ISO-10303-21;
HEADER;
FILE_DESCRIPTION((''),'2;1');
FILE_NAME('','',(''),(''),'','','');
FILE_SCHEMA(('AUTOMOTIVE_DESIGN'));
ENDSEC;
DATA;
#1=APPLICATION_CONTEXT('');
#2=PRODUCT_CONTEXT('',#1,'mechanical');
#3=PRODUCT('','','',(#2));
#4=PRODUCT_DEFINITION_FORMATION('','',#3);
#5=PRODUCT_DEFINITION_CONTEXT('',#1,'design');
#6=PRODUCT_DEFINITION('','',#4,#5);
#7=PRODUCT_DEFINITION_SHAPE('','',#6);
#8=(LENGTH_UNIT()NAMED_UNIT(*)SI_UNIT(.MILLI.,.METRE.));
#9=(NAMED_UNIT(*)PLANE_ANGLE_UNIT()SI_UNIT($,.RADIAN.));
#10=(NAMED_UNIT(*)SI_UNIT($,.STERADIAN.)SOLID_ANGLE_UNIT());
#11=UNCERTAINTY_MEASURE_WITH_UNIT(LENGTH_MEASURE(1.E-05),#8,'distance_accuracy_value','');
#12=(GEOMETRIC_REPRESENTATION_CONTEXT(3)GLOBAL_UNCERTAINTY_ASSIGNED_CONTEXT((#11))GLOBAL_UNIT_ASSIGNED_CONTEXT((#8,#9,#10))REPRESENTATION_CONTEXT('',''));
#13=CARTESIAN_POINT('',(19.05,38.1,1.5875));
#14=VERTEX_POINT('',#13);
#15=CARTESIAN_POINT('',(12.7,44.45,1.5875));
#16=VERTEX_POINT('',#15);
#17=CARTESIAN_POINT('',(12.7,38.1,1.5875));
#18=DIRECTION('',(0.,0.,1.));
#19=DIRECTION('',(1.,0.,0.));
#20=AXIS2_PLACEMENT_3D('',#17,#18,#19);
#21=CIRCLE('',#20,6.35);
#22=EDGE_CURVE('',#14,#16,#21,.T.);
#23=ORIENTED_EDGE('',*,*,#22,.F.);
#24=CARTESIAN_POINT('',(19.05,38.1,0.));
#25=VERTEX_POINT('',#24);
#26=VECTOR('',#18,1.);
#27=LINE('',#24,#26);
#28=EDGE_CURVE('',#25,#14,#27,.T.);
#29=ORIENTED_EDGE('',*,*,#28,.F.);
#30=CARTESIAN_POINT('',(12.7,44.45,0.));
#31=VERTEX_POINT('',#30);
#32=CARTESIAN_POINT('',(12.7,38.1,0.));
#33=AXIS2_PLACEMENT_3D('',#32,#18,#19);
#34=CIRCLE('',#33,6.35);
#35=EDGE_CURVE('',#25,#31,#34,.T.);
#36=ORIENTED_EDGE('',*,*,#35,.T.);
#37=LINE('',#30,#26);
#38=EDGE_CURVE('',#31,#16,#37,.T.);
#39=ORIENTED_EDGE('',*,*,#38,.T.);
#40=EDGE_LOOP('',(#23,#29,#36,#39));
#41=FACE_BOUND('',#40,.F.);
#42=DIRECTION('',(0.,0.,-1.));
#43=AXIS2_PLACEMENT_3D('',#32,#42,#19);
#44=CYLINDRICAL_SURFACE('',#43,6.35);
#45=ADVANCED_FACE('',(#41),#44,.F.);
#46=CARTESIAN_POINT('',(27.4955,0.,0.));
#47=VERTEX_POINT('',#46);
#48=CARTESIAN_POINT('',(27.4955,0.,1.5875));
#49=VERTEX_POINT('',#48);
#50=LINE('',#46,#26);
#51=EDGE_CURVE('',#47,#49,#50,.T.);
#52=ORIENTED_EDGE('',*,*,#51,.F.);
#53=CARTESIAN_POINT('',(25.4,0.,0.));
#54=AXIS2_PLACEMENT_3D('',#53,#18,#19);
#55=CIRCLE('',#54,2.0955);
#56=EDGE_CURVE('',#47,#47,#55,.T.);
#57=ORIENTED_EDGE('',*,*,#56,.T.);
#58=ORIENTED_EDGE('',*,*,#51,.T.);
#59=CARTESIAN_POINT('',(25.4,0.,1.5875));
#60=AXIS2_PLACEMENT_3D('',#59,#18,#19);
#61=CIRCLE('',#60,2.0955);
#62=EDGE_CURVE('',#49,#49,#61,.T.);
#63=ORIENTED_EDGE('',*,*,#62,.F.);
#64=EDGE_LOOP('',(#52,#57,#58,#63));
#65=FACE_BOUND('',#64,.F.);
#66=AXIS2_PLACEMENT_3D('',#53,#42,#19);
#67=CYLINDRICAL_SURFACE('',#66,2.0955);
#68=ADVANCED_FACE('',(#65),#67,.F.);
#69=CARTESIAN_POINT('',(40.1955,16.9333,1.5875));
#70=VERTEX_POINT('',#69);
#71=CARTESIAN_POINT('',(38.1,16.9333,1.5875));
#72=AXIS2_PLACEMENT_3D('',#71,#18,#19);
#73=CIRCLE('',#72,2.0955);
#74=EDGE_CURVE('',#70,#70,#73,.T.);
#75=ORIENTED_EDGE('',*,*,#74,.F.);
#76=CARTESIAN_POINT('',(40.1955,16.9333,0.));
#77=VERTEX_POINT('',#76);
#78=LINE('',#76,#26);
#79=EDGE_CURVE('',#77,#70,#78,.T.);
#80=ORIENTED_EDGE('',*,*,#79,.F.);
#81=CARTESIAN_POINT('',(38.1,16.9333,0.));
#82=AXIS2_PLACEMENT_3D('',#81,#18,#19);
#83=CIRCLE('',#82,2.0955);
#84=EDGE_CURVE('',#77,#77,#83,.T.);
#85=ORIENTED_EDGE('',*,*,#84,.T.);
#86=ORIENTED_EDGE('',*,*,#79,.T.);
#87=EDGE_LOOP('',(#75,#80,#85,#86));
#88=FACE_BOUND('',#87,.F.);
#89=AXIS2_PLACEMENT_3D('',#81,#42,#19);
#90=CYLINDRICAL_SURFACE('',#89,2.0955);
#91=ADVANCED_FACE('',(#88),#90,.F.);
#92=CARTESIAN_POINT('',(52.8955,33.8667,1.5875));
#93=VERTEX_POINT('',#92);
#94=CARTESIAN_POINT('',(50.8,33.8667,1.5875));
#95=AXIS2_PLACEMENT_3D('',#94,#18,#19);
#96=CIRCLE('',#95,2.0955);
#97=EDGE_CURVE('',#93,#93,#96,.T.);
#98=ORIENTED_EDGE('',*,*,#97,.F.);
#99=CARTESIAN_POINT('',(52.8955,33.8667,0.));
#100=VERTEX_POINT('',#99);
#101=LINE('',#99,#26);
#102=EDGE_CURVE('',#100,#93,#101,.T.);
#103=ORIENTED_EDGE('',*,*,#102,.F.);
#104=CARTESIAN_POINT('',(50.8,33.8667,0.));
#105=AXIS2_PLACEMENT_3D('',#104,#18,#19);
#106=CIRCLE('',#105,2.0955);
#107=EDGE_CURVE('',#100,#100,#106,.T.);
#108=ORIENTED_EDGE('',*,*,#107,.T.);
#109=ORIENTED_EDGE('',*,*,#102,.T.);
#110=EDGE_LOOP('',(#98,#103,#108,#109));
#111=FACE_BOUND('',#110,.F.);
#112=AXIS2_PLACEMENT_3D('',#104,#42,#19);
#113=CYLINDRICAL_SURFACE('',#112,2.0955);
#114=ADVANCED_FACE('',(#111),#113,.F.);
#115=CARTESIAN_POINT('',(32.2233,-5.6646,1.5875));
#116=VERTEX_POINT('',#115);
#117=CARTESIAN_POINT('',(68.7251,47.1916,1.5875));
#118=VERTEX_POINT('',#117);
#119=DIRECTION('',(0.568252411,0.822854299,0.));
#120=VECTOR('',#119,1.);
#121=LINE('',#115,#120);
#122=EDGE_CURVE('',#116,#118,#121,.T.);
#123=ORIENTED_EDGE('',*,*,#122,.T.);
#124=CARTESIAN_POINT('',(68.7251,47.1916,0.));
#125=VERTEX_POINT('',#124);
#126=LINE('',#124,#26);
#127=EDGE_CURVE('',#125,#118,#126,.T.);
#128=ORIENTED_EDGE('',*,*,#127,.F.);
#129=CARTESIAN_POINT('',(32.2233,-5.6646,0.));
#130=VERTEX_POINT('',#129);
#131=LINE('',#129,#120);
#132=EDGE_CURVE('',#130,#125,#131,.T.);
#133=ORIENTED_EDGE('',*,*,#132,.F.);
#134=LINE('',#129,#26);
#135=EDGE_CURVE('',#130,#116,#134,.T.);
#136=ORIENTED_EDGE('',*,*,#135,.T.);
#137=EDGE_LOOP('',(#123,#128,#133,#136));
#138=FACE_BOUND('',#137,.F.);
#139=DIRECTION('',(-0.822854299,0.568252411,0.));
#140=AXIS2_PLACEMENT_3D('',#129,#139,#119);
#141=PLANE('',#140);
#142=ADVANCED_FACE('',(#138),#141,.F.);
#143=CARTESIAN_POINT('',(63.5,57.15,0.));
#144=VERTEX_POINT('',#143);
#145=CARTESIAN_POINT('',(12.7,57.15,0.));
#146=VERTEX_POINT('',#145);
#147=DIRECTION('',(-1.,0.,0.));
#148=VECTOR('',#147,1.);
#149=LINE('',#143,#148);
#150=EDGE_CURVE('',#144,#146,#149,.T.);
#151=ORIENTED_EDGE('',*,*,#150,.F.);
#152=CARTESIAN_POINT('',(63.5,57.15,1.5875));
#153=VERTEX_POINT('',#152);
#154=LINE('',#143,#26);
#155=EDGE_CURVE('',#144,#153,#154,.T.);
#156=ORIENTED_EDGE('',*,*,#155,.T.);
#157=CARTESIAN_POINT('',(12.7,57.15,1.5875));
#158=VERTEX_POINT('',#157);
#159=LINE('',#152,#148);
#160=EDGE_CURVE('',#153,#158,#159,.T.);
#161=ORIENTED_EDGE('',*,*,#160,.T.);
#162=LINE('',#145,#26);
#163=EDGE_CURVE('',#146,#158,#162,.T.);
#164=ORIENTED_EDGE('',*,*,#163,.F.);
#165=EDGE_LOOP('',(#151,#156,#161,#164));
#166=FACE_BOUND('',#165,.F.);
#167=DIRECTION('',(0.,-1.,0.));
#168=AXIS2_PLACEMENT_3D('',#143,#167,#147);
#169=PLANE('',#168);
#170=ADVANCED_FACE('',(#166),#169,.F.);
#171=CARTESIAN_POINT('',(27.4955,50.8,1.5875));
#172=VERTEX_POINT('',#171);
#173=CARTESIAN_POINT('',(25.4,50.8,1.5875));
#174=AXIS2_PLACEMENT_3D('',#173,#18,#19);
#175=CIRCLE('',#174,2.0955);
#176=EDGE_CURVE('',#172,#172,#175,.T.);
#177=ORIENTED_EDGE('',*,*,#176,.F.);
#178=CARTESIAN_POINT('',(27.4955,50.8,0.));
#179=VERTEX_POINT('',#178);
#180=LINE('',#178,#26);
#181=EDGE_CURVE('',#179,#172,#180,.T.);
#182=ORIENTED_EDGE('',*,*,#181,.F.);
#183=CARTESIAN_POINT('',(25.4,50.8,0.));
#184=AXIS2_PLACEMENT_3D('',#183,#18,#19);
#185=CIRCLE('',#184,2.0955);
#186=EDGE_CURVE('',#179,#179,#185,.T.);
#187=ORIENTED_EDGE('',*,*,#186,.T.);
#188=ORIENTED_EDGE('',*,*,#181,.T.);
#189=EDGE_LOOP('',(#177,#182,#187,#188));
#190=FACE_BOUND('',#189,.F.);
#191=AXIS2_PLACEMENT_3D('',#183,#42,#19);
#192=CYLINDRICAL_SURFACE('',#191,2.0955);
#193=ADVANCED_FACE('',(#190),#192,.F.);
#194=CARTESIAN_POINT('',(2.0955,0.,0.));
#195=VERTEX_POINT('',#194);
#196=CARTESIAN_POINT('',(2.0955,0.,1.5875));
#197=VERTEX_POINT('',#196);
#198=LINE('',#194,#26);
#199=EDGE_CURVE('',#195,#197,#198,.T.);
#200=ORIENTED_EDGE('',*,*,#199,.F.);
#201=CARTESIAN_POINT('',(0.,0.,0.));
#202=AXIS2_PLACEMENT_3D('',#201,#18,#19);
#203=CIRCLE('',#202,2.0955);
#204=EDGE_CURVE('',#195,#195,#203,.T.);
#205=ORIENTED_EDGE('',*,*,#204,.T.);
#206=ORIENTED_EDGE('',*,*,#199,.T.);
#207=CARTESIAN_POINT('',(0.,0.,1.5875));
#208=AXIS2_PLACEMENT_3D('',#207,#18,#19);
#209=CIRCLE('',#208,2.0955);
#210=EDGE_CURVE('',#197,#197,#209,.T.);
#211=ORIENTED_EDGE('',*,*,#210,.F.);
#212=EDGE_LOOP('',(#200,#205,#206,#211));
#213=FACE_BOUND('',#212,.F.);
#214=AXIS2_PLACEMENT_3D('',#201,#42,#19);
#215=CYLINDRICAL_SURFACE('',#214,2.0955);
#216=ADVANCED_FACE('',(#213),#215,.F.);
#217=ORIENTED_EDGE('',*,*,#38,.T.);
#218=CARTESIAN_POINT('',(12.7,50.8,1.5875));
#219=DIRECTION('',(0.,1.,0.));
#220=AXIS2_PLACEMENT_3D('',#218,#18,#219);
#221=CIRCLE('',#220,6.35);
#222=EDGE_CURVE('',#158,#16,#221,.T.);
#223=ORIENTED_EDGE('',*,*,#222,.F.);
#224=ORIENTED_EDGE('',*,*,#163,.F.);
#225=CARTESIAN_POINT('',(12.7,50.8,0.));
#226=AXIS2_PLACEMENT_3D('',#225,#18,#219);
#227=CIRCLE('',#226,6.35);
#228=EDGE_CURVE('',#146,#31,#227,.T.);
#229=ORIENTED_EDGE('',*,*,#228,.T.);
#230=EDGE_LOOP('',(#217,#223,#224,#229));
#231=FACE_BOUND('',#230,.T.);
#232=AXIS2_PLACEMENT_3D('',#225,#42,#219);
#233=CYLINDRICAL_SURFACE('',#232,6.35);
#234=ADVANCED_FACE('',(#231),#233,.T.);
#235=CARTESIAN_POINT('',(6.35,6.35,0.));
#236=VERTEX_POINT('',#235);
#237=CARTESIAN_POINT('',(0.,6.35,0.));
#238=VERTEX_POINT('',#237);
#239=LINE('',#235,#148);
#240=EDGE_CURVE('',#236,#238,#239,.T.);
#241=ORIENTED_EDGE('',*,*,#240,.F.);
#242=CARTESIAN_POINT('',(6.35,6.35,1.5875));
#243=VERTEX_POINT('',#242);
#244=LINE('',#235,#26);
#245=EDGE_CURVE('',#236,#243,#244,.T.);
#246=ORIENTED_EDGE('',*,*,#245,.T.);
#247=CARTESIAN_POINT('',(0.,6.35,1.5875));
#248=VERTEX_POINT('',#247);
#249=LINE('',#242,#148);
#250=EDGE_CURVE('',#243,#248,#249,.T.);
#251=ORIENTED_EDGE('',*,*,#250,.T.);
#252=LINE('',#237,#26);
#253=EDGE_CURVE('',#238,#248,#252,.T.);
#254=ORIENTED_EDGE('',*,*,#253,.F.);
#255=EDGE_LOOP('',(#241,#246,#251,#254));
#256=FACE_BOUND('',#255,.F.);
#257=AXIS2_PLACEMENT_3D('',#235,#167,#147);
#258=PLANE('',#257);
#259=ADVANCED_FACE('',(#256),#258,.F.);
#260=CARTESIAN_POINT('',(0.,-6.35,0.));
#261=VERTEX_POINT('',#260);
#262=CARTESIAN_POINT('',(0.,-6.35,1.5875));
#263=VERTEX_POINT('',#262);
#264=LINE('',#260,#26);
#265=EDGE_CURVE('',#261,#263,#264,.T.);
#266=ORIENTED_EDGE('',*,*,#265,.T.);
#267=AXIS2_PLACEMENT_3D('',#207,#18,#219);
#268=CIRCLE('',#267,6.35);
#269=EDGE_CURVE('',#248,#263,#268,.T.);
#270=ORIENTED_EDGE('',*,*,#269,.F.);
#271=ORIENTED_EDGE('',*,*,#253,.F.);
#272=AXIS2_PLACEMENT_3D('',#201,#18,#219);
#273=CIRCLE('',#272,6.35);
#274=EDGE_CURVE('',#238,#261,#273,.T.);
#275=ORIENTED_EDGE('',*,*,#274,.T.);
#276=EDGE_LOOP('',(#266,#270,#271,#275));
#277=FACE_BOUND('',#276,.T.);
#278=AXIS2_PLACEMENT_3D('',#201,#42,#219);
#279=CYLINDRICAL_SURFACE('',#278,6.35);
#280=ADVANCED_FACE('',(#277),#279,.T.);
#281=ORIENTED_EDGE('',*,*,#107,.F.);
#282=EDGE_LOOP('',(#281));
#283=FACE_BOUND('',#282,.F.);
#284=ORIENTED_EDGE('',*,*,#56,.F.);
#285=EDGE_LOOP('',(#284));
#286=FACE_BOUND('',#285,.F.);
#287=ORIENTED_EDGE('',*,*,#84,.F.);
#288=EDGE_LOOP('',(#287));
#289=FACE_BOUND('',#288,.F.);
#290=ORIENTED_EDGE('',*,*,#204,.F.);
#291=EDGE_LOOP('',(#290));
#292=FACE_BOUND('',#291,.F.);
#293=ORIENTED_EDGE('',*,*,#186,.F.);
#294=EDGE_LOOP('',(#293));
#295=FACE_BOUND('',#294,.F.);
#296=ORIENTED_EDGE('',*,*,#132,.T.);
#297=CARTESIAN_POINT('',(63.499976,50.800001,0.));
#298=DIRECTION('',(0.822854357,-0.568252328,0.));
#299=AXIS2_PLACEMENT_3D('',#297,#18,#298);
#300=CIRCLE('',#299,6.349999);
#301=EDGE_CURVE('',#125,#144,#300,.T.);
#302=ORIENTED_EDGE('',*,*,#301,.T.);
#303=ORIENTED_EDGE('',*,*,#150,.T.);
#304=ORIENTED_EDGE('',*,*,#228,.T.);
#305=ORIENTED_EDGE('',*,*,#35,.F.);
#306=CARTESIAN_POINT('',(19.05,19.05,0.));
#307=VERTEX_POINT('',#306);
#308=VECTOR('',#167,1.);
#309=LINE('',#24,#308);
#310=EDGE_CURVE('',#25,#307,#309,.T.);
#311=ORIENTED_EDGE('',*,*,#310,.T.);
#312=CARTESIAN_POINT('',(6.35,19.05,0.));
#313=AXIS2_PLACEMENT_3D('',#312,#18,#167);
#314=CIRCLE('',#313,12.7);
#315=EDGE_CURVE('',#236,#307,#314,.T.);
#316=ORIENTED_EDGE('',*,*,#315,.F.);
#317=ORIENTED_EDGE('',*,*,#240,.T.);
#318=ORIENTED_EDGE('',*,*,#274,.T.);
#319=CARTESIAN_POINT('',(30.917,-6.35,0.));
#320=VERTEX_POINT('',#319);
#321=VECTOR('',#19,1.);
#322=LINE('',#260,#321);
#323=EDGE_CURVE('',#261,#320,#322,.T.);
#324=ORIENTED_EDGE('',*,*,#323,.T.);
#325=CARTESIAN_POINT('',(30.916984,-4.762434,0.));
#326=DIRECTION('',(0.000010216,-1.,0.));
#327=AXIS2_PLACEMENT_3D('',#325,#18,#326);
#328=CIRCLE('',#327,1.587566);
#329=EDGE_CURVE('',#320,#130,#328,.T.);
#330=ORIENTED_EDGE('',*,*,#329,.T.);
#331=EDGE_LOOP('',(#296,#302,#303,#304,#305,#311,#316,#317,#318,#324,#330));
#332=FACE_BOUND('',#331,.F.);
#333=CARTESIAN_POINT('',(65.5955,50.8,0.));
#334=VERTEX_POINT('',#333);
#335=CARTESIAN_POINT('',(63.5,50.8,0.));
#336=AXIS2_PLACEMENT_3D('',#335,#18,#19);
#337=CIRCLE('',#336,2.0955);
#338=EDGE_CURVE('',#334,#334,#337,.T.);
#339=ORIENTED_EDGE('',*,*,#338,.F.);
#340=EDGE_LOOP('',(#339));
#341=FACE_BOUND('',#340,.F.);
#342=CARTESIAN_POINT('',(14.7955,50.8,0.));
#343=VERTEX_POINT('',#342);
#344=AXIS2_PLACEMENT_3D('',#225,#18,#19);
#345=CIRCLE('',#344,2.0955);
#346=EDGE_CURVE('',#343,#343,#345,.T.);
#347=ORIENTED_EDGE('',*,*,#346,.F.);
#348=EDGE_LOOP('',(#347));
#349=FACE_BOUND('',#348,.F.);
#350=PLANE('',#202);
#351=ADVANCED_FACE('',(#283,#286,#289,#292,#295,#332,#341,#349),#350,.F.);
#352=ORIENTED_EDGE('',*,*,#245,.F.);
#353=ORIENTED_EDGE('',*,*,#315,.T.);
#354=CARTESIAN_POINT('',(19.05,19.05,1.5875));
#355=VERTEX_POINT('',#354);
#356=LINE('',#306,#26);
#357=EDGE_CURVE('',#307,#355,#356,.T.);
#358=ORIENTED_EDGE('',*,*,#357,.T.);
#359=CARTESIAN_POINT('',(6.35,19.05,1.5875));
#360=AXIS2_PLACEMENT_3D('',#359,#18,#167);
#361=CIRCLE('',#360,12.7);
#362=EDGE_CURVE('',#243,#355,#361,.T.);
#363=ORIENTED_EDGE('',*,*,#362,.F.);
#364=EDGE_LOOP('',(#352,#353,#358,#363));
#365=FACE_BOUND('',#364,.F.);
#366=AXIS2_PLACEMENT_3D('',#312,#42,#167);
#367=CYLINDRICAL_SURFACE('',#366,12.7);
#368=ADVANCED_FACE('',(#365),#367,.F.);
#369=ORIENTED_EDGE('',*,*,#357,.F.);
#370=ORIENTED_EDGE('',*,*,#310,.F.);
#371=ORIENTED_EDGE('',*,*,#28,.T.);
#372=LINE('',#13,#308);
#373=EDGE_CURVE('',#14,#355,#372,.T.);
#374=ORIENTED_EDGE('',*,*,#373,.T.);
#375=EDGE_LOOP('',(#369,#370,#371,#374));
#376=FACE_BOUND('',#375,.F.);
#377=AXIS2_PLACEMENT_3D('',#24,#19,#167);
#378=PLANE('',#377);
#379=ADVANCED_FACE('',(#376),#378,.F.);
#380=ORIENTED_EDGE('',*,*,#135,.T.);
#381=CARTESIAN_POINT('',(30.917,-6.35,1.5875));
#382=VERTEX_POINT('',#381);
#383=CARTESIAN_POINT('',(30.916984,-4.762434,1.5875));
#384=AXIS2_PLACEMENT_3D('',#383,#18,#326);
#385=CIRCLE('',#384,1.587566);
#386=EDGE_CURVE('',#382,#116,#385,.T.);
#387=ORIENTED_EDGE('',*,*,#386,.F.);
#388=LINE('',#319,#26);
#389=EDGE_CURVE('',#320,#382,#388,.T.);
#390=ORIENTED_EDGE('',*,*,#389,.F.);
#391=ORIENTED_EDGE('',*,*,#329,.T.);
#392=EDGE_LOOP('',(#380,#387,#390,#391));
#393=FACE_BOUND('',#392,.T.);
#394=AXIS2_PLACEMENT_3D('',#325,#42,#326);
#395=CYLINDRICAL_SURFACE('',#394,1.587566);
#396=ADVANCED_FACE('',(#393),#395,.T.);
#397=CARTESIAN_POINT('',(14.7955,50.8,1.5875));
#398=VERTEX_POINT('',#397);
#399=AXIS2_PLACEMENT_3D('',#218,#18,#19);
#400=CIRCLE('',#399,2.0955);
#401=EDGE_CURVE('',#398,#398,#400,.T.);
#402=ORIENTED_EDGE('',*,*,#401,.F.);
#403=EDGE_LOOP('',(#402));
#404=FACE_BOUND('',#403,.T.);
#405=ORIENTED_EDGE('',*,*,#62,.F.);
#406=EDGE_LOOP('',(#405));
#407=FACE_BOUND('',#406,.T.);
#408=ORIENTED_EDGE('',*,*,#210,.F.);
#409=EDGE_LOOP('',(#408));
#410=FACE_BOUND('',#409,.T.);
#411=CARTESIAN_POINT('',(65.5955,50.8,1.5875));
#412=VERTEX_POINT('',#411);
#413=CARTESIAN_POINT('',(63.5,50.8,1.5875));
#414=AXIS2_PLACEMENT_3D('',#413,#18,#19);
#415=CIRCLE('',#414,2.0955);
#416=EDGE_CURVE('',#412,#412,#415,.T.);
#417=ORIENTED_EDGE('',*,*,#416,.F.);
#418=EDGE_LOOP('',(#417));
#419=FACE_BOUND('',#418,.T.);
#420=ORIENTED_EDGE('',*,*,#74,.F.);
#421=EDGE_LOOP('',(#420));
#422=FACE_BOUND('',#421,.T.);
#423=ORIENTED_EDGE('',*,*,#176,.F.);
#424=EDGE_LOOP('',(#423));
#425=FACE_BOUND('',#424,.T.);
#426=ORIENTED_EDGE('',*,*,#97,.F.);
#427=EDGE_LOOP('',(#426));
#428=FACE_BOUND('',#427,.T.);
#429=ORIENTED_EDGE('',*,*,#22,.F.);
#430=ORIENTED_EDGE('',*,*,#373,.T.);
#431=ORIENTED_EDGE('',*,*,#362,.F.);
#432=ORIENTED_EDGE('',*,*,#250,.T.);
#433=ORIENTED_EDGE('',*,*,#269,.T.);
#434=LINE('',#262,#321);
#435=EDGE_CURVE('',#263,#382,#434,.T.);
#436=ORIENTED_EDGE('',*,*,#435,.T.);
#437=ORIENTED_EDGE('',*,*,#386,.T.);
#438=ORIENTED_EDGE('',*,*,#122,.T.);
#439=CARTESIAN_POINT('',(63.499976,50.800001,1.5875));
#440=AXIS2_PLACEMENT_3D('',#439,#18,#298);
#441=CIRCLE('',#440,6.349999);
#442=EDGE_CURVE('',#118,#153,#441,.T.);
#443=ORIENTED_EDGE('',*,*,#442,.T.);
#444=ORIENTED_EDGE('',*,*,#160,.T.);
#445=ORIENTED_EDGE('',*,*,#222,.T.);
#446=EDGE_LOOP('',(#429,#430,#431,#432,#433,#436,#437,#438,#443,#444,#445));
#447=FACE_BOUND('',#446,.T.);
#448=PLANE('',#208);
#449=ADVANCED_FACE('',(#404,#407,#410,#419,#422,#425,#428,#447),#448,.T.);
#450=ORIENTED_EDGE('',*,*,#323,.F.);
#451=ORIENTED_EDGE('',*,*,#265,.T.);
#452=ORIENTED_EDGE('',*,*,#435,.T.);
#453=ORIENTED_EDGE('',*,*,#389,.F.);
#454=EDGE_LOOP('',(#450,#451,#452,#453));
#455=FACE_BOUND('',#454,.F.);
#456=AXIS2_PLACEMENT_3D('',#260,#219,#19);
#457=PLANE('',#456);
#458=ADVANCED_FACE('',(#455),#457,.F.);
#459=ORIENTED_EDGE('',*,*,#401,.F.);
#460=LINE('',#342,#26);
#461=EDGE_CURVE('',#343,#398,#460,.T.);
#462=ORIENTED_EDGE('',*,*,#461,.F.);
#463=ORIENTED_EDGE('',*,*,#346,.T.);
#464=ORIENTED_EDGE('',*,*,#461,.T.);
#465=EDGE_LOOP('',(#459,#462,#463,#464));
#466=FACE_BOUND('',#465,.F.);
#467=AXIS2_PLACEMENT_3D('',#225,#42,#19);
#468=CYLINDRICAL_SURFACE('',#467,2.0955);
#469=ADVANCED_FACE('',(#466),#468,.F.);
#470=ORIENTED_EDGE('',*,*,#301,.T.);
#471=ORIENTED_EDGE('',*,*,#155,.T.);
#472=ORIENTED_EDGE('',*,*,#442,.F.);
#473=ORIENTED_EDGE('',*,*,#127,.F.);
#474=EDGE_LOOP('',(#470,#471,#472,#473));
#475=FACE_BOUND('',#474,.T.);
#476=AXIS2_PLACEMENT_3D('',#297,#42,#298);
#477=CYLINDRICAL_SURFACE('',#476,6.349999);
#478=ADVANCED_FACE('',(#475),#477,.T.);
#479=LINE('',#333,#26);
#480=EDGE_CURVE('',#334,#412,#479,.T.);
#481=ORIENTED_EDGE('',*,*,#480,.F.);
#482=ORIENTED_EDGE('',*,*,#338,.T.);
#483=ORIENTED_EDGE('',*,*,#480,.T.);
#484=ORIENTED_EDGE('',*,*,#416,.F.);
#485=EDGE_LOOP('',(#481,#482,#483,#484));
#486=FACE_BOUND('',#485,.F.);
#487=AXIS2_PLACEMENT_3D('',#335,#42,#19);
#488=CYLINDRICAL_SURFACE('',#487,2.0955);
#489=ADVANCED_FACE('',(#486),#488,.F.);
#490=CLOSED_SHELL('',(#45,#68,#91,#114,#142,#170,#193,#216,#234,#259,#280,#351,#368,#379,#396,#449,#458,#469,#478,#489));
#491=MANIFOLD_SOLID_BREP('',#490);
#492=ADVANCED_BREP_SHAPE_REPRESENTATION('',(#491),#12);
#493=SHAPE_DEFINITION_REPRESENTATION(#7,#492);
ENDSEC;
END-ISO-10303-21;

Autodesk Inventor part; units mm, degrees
ref_plane "YZ Plane" through (0, 0, 0) normal (1, 0, 0) x (0, 1, 0)
ref_plane "XZ Plane" through (0, 0, 0) normal (0, 1, 0) x (-1, 0, 0)
ref_plane "XY Plane" through (0, 0, 0) normal (0, 0, 1) x (1, 0, 0)
sketch "main" plane through (0, 0, 0) normal (0, 0, 1) x (1, 0, 0)
  circle A0 centre (-11.3817, -22.2219) radius 2.0955
  circle A1 centre (-11.3817, 28.5781) radius 2.0955
  circle A2 centre (-24.0817, 28.5781) radius 2.0955
  arc A3 (-24.0817, 34.9281) -> (-24.0817, 22.2281) centre (-24.0817, 28.5781) ccw
  line L0 (-4.5584, -27.8865) -> (31.9434, 24.9697)
  line L1 (26.7183, 34.9281) -> (-24.0817, 34.9281)
  arc A4 (31.9434, 24.9697) -> (26.7183, 34.9281) centre (26.7183, 28.5781) ccw
  circle A5 centre (26.7183, 28.5781) radius 2.0955
  arc A6 (-5.8647, -28.5719) -> (-4.5584, -27.8865) centre (-5.8647, -26.9844) ccw
  line L2 (-36.7817, -15.8719) -> (-36.7817, -15.8719)
  line L3 (-36.7817, -28.5719) -> (-5.8647, -28.5719)
  circle A7 centre (-36.7817, -22.2219) radius 2.0955
  arc A8 (-36.7817, -15.8719) -> (-36.7817, -28.5719) centre (-36.7817, -22.2219) ccw
  line L4 (-17.7317, 15.8781) -> (-17.7317, -3.1719)
  line L5 (-30.4317, -15.8719) -> (-36.7817, -15.8719)
  line L6 (-24.0817, 22.2281) -> (-24.0817, 22.2281)
  arc A9 (-17.7317, 15.8781) -> (-24.0817, 22.2281) centre (-24.0817, 15.8781) ccw
  arc A10 (-30.4317, -15.8719) -> (-17.7317, -3.1719) centre (-30.4317, -3.1719) ccw
  circle A11 centre (1.3183, -5.2886) radius 2.0955
  circle A12 centre (14.0183, 11.6448) radius 2.0955
  point P0 (-15.5195, 2.5641)
  point P1 (-17.7317, 22.2281)
  dimension "d0" = 4.191
  dimension "d1" = 4.191
  dimension "d4" = 1.5875
  dimension "d7" = 6.35
  dimension "d8" = 12.7
  dimension "d11" = 4.191
  dimension "d13" = 4.191
sketch "Sketch1" plane through (0, 0, 0) normal (0, 0, 1) x (1, 0, 0)
  circle A0 centre (25.4, 0) radius 2.0955
  circle A1 centre (25.4, 50.8) radius 2.0955
  circle A2 centre (12.7, 50.8) radius 2.0955
  arc A3 (12.7, 57.15) -> (12.7, 44.45) centre (12.7, 50.8) ccw
  line L0 (32.2233, -5.6646) -> (68.7251, 47.1916)
  line L1 (63.5, 57.15) -> (12.7, 57.15)
  arc A4 (68.7251, 47.1916) -> (63.5, 57.15) centre (63.5, 50.8) ccw
  circle A5 centre (63.5, 50.8) radius 2.0955
  arc A6 (30.917, -6.35) -> (32.2233, -5.6646) centre (30.917, -4.7625) ccw
  line L2 (0, 6.35) -> (0, 6.35)
  line L3 (0, -6.35) -> (30.917, -6.35)
  circle A7 centre (0, 0) radius 2.0955
  arc A8 (0, 6.35) -> (0, -6.35) centre (0, 0) ccw
  line L4 (19.05, 38.1) -> (19.05, 19.05)
  line L5 (6.35, 6.35) -> (0, 6.35)
  line L6 (12.7, 44.45) -> (12.7, 44.45)
  arc A9 (19.05, 38.1) -> (12.7, 44.45) centre (12.7, 38.1) ccw
  arc A10 (6.35, 6.35) -> (19.05, 19.05) centre (6.35, 19.05) ccw
  circle A11 centre (38.1, 16.9333) radius 2.0955
  circle A12 centre (50.8, 33.8667) radius 2.0955
extrude "Extrusion1" add sketch "Sketch1" along normal blind 1.5875
equation "\"BendRadius\" = Thickness"
equation "\"BendReliefWidth\" = Thickness"
equation "\"BendReliefDepth\" = 0.5 * Thickness"
equation "\"CornerReliefSize\" = 4 * Thickness"
equation "\"MinimumRemnant\" = 2 * Thickness"
equation "\"TransitionRadius\" = BendRadius"
equation "\"JacobiRadiusSize\" = BendRadius"
equation "\"GapSize\" = Thickness"
equation "\"Thickness\" = 1.5875"
properties part number "gusset" material "Acetal Resin, White"
